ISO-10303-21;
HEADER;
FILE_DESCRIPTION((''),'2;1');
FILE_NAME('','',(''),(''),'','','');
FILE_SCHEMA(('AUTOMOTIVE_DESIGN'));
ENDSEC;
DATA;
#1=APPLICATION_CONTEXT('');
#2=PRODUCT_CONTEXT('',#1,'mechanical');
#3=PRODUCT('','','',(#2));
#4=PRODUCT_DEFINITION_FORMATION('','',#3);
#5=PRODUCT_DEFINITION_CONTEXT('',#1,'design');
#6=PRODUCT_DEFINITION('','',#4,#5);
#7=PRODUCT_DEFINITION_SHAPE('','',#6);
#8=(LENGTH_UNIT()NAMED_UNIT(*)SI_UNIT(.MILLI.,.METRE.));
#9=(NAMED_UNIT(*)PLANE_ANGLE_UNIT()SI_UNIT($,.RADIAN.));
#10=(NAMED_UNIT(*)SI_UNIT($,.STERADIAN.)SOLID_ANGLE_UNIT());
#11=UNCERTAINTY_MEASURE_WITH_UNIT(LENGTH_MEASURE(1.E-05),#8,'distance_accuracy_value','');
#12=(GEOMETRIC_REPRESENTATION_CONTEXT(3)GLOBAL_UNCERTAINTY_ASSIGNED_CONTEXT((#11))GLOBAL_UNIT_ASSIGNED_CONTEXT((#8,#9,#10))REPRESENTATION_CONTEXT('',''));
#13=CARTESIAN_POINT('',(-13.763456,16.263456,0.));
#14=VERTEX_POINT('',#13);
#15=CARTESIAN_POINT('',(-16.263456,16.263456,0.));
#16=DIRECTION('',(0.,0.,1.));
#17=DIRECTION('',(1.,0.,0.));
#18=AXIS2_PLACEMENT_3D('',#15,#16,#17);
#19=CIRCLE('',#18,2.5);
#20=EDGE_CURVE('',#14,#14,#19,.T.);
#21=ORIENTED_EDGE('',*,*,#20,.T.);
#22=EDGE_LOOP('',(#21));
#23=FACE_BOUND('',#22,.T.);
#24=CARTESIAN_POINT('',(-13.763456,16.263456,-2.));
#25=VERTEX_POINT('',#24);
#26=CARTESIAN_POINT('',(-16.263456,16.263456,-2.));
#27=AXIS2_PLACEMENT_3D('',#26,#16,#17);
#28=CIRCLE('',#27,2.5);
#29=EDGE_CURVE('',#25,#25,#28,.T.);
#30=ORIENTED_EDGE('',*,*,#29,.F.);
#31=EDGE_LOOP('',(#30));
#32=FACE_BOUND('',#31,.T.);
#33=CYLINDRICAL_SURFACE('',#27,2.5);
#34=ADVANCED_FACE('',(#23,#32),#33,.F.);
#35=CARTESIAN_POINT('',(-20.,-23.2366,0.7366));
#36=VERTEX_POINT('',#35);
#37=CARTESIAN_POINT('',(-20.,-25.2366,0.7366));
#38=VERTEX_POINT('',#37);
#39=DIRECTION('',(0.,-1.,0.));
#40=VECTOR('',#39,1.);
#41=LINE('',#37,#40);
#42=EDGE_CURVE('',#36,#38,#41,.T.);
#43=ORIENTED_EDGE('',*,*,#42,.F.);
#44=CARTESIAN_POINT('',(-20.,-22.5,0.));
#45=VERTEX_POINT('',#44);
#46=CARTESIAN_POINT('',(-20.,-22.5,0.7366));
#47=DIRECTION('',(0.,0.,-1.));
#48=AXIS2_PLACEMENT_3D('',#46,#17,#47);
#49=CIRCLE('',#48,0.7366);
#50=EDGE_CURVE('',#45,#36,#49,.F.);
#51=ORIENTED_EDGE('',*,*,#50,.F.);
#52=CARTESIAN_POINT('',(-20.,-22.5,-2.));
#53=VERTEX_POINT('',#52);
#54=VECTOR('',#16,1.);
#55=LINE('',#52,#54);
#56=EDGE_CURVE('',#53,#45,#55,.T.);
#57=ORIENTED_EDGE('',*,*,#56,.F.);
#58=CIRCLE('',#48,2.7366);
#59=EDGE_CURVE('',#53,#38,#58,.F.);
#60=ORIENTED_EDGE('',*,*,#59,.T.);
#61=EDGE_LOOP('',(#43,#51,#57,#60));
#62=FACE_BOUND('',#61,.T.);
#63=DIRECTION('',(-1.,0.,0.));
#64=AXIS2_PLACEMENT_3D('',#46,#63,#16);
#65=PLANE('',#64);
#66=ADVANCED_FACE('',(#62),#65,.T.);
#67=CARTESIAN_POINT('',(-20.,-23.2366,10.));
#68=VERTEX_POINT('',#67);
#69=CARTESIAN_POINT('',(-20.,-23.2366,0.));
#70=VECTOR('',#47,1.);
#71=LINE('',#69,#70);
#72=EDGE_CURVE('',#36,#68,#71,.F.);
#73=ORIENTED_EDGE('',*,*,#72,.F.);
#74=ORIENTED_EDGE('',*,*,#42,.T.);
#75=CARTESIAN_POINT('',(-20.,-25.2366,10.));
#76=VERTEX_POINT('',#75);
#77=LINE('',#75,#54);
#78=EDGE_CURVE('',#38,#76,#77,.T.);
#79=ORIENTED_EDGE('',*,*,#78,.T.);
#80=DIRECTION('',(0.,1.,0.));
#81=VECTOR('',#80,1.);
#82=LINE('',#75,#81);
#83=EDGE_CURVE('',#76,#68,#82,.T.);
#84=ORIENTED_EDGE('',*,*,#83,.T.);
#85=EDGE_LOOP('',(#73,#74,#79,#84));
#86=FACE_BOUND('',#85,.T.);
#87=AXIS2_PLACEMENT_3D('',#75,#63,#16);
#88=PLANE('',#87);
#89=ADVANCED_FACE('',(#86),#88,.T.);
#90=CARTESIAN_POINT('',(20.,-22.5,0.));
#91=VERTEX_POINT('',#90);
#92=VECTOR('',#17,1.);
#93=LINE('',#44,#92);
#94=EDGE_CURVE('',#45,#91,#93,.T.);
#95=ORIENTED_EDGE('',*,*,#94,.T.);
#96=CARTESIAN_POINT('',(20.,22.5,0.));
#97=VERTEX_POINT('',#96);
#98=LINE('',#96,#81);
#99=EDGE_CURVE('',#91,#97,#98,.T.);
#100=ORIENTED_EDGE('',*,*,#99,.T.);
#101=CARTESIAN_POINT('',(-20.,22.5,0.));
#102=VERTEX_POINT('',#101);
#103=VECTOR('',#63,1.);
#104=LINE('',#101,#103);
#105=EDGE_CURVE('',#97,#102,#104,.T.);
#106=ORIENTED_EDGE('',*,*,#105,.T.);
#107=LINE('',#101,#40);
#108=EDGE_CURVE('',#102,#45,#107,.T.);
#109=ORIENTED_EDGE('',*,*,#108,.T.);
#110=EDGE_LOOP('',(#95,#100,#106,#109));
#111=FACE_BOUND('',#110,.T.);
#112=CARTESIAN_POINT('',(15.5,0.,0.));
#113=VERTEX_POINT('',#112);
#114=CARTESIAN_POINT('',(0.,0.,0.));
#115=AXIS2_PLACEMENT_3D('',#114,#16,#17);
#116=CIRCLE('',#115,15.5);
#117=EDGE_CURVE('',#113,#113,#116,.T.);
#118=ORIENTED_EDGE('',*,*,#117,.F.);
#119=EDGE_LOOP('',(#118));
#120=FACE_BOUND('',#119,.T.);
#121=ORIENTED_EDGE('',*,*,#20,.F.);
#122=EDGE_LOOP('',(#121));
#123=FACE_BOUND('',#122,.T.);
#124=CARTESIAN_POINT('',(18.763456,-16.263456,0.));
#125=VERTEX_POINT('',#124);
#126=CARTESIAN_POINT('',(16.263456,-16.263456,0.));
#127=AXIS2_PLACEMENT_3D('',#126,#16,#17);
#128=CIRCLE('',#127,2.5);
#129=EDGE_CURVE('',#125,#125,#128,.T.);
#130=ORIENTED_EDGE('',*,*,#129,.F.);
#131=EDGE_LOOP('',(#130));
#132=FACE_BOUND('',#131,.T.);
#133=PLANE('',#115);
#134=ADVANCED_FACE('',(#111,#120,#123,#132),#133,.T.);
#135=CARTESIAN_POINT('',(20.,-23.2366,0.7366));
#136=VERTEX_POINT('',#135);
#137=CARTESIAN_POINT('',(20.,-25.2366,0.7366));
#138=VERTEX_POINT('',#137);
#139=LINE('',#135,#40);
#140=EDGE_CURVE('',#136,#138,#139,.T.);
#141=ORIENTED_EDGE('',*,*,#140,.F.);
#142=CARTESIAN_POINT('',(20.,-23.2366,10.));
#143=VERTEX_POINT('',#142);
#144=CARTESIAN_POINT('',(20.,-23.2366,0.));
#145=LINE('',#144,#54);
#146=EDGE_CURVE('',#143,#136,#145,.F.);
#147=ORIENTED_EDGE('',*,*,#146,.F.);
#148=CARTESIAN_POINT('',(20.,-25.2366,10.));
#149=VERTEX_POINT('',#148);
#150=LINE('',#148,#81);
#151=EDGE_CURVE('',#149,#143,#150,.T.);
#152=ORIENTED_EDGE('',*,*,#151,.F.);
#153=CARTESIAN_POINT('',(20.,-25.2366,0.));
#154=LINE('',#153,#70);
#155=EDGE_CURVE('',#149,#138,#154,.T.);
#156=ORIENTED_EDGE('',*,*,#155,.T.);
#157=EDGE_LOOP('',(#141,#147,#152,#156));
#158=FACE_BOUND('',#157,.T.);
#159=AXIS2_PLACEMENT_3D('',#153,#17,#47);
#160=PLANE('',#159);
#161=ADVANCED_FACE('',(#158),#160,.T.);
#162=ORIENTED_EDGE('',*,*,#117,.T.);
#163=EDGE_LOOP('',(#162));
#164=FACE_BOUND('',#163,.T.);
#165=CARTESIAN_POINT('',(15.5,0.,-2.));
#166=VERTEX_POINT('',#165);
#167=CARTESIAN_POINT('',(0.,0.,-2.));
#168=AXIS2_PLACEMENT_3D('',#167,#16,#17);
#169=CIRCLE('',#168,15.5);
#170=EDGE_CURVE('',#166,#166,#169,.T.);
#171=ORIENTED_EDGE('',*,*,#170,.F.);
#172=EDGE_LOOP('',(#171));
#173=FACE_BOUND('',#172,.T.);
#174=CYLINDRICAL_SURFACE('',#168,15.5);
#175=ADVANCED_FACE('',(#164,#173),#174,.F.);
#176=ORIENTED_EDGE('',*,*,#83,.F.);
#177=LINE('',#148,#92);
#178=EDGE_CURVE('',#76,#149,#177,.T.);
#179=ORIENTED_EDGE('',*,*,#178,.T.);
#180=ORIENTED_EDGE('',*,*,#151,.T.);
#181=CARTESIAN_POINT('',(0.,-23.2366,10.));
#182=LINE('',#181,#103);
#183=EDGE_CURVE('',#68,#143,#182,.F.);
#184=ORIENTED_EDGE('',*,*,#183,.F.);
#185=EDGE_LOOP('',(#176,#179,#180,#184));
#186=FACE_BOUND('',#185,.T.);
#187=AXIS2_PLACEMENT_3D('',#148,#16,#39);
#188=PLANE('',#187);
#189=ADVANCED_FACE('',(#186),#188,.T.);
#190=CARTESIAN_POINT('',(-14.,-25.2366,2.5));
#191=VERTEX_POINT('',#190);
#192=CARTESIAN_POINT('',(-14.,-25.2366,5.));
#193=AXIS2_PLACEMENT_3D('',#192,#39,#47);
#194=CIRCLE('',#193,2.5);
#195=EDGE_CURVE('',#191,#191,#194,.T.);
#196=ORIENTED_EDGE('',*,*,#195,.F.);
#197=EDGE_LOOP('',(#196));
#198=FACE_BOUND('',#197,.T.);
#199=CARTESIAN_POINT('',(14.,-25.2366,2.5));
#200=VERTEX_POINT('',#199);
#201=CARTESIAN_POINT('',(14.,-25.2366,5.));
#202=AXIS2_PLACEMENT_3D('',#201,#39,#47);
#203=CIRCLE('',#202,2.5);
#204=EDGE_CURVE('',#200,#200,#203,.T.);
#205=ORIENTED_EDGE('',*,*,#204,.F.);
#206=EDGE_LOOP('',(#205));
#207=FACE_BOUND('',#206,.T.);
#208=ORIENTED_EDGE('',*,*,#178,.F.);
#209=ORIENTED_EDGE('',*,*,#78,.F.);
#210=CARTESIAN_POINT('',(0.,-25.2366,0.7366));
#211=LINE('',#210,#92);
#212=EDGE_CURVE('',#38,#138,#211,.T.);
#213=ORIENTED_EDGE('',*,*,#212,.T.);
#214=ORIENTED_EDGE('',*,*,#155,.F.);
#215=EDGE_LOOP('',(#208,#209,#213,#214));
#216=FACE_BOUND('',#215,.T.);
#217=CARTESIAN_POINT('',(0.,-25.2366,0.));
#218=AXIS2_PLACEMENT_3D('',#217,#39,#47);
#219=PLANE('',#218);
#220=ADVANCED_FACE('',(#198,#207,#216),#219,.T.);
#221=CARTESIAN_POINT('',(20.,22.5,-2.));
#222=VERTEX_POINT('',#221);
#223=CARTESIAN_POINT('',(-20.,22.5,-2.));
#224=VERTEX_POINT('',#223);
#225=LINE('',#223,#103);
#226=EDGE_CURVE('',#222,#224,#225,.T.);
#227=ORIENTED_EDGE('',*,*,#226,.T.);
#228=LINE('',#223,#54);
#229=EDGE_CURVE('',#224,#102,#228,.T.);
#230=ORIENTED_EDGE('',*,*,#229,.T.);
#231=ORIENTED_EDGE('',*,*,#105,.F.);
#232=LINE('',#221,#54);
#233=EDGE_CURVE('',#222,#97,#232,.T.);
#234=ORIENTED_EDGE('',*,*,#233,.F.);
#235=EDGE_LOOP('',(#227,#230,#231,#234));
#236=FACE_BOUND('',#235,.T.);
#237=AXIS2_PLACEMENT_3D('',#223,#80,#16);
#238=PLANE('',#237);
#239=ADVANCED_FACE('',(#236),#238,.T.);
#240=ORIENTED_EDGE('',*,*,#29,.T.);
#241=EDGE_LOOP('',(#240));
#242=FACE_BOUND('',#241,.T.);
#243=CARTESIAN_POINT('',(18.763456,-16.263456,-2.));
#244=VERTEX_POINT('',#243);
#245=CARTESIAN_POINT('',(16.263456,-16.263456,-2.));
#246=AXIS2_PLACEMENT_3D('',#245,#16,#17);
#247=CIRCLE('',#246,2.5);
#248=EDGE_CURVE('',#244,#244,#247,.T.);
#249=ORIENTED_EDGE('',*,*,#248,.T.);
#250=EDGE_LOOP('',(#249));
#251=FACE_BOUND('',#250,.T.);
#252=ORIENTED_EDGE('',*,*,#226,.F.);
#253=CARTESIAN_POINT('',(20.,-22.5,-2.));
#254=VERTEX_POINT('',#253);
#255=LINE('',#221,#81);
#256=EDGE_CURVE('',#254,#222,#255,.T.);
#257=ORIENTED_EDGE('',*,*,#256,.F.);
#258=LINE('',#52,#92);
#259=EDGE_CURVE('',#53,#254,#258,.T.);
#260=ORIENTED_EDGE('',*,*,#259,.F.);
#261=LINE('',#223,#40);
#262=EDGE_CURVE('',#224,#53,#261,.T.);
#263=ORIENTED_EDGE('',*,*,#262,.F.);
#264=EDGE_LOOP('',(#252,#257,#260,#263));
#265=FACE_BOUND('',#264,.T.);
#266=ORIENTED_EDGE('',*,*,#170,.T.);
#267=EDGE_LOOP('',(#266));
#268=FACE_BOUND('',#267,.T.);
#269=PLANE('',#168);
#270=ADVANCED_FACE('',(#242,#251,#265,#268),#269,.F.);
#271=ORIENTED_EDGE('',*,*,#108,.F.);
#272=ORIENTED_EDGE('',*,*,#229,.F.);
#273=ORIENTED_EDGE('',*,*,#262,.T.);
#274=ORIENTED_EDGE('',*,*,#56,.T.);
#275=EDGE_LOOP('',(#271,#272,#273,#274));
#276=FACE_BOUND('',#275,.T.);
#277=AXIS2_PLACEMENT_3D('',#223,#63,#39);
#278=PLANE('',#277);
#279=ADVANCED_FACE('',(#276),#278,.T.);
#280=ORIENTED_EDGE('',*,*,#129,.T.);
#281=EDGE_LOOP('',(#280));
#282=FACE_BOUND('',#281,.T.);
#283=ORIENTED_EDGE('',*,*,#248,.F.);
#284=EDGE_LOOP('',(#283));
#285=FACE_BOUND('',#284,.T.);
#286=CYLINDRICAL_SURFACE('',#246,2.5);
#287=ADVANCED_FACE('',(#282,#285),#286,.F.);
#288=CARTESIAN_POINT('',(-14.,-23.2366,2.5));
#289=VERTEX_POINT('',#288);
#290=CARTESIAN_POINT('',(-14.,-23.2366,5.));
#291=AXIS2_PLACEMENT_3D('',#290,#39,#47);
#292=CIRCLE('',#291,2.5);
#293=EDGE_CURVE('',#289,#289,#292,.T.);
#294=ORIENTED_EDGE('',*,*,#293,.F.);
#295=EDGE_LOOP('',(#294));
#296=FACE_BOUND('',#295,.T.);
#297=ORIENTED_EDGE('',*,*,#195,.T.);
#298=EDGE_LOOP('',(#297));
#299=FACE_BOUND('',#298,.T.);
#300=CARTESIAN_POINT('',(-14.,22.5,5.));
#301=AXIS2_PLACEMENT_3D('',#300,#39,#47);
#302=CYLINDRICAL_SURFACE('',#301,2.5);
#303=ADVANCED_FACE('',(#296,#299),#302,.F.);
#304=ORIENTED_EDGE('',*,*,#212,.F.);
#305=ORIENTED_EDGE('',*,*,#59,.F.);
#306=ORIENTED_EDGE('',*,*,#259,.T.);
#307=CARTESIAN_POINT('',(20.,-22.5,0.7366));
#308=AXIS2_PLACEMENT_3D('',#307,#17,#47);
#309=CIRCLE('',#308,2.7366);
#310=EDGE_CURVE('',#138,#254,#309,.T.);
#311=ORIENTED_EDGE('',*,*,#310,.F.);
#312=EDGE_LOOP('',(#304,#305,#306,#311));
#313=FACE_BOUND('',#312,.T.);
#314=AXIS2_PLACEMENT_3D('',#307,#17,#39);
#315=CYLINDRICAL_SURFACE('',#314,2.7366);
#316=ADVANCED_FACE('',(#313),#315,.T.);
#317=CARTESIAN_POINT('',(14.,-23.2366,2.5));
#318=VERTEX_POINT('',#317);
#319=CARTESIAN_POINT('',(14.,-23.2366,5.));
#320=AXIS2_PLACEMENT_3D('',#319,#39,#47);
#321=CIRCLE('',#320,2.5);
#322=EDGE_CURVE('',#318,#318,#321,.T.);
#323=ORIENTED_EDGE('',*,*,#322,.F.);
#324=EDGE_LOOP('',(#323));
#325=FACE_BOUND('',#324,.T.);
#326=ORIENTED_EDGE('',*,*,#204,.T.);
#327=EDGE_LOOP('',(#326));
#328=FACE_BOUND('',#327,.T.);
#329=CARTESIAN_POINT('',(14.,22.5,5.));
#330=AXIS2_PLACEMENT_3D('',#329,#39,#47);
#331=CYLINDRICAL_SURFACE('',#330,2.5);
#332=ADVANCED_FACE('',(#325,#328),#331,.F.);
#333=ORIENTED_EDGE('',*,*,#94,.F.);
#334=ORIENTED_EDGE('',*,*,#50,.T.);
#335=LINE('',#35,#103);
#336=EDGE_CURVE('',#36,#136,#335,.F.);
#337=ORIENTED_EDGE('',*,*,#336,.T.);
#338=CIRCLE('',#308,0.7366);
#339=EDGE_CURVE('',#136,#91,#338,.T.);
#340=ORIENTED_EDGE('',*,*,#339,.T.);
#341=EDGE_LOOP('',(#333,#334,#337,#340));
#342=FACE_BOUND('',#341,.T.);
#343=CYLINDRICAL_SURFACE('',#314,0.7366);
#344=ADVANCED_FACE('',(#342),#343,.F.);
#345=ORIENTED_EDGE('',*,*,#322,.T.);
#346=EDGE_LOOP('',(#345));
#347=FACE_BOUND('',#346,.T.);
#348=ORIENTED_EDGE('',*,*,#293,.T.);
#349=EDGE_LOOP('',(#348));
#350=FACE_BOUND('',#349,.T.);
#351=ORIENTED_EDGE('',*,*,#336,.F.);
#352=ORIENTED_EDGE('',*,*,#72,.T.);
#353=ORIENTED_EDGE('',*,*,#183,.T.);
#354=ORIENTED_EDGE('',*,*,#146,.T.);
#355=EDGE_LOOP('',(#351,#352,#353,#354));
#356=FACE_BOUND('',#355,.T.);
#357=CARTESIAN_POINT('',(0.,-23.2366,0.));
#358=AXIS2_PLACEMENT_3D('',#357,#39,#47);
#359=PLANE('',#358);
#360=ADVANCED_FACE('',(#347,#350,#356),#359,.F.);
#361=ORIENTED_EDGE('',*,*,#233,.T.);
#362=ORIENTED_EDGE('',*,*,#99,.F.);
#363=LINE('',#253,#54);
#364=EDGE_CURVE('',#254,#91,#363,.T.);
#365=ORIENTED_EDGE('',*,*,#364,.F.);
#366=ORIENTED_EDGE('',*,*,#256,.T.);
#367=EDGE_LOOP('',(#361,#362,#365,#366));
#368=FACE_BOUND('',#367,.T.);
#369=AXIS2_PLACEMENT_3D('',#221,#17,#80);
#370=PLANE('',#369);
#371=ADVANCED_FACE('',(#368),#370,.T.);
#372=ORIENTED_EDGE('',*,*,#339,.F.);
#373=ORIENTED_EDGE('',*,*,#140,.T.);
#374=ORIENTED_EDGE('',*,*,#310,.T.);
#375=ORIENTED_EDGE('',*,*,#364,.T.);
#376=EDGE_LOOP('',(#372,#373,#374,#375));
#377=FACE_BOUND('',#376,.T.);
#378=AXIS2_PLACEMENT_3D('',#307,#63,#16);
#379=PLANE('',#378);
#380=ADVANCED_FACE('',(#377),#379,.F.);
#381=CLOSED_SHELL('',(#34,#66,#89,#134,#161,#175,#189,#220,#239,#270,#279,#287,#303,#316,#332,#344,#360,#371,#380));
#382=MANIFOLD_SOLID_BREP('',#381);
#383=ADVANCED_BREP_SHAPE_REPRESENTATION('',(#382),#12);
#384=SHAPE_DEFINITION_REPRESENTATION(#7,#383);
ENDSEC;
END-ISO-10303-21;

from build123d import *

# Parameters (mm, degrees)
SKETCH1_W          = 40
SKETCH1_H          = 45
BASE_FLANGE1_DEPTH = 2
SKETCH8_R          = 15.5
CUT_EXTRUDE5_DEPTH = 31.170349683
SKETCH9_R          = 2.5
CUT_EXTRUDE6_DEPTH = 31.170349683
EDGE_FLANGE1_DEPTH = 40
SKETCH13_R         = 2.5
CUT_EXTRUDE7_DEPTH = 53.714162988


# Sheet-metal steps are written as plain solids
with BuildPart() as part:
    # Sketch1 → Base-Flange1 (new body)
    with BuildSketch(Plane.XY):
        Rectangle(SKETCH1_W, SKETCH1_H)
    extrude(amount=-BASE_FLANGE1_DEPTH)

    # Sketch8 → Cut-Extrude5 (cut, through all)
    with BuildSketch(Plane.XY):
        Circle(SKETCH8_R)
    extrude(amount=-CUT_EXTRUDE5_DEPTH, mode=Mode.SUBTRACT)

    # Sketch9 → Cut-Extrude6 (cut, through all)
    with BuildSketch(Plane.XY):
        with Locations((-16.263455967, 16.263455967)):
            Circle(SKETCH9_R)
        with Locations((16.263455967, -16.263455967)):
            Circle(SKETCH9_R)
    extrude(amount=-CUT_EXTRUDE6_DEPTH, mode=Mode.SUBTRACT)

    # Edge-Flange1 section (across the edge) → Edge-Flange1 (add)
    with BuildSketch(Plane(origin=(-20, -23.2366, 0), x_dir=(0, 1, 0), z_dir=(1, 0, 0))):
        with BuildLine():
            Line((-2, 0.7366), (-2, 10))
            Line((-2, 10), (0, 10))
            Line((0, 10), (0, 0.7366))
            ThreePointArc((0, 0.7366), (0.215745145, 0.215745145), (0.7366, 0))
            Line((0.7366, 0), (0.7366, -2))
            ThreePointArc((0.7366, -2), (-1.198468417, -1.198468417), (-2, 0.7366))
        make_face()
    extrude(amount=EDGE_FLANGE1_DEPTH)

    # Sketch13 → Cut-Extrude7 (cut, through all)
    with BuildSketch(Plane.XZ.offset(25.2366)):
        with Locations(Location((-14, 5, 0), (0, 0, 270))):
            Circle(SKETCH13_R)
        with Locations(Location((14, 5, 0), (0, 0, 270))):
            Circle(SKETCH13_R)
    extrude(amount=-CUT_EXTRUDE7_DEPTH, mode=Mode.SUBTRACT)


solid = part.part
